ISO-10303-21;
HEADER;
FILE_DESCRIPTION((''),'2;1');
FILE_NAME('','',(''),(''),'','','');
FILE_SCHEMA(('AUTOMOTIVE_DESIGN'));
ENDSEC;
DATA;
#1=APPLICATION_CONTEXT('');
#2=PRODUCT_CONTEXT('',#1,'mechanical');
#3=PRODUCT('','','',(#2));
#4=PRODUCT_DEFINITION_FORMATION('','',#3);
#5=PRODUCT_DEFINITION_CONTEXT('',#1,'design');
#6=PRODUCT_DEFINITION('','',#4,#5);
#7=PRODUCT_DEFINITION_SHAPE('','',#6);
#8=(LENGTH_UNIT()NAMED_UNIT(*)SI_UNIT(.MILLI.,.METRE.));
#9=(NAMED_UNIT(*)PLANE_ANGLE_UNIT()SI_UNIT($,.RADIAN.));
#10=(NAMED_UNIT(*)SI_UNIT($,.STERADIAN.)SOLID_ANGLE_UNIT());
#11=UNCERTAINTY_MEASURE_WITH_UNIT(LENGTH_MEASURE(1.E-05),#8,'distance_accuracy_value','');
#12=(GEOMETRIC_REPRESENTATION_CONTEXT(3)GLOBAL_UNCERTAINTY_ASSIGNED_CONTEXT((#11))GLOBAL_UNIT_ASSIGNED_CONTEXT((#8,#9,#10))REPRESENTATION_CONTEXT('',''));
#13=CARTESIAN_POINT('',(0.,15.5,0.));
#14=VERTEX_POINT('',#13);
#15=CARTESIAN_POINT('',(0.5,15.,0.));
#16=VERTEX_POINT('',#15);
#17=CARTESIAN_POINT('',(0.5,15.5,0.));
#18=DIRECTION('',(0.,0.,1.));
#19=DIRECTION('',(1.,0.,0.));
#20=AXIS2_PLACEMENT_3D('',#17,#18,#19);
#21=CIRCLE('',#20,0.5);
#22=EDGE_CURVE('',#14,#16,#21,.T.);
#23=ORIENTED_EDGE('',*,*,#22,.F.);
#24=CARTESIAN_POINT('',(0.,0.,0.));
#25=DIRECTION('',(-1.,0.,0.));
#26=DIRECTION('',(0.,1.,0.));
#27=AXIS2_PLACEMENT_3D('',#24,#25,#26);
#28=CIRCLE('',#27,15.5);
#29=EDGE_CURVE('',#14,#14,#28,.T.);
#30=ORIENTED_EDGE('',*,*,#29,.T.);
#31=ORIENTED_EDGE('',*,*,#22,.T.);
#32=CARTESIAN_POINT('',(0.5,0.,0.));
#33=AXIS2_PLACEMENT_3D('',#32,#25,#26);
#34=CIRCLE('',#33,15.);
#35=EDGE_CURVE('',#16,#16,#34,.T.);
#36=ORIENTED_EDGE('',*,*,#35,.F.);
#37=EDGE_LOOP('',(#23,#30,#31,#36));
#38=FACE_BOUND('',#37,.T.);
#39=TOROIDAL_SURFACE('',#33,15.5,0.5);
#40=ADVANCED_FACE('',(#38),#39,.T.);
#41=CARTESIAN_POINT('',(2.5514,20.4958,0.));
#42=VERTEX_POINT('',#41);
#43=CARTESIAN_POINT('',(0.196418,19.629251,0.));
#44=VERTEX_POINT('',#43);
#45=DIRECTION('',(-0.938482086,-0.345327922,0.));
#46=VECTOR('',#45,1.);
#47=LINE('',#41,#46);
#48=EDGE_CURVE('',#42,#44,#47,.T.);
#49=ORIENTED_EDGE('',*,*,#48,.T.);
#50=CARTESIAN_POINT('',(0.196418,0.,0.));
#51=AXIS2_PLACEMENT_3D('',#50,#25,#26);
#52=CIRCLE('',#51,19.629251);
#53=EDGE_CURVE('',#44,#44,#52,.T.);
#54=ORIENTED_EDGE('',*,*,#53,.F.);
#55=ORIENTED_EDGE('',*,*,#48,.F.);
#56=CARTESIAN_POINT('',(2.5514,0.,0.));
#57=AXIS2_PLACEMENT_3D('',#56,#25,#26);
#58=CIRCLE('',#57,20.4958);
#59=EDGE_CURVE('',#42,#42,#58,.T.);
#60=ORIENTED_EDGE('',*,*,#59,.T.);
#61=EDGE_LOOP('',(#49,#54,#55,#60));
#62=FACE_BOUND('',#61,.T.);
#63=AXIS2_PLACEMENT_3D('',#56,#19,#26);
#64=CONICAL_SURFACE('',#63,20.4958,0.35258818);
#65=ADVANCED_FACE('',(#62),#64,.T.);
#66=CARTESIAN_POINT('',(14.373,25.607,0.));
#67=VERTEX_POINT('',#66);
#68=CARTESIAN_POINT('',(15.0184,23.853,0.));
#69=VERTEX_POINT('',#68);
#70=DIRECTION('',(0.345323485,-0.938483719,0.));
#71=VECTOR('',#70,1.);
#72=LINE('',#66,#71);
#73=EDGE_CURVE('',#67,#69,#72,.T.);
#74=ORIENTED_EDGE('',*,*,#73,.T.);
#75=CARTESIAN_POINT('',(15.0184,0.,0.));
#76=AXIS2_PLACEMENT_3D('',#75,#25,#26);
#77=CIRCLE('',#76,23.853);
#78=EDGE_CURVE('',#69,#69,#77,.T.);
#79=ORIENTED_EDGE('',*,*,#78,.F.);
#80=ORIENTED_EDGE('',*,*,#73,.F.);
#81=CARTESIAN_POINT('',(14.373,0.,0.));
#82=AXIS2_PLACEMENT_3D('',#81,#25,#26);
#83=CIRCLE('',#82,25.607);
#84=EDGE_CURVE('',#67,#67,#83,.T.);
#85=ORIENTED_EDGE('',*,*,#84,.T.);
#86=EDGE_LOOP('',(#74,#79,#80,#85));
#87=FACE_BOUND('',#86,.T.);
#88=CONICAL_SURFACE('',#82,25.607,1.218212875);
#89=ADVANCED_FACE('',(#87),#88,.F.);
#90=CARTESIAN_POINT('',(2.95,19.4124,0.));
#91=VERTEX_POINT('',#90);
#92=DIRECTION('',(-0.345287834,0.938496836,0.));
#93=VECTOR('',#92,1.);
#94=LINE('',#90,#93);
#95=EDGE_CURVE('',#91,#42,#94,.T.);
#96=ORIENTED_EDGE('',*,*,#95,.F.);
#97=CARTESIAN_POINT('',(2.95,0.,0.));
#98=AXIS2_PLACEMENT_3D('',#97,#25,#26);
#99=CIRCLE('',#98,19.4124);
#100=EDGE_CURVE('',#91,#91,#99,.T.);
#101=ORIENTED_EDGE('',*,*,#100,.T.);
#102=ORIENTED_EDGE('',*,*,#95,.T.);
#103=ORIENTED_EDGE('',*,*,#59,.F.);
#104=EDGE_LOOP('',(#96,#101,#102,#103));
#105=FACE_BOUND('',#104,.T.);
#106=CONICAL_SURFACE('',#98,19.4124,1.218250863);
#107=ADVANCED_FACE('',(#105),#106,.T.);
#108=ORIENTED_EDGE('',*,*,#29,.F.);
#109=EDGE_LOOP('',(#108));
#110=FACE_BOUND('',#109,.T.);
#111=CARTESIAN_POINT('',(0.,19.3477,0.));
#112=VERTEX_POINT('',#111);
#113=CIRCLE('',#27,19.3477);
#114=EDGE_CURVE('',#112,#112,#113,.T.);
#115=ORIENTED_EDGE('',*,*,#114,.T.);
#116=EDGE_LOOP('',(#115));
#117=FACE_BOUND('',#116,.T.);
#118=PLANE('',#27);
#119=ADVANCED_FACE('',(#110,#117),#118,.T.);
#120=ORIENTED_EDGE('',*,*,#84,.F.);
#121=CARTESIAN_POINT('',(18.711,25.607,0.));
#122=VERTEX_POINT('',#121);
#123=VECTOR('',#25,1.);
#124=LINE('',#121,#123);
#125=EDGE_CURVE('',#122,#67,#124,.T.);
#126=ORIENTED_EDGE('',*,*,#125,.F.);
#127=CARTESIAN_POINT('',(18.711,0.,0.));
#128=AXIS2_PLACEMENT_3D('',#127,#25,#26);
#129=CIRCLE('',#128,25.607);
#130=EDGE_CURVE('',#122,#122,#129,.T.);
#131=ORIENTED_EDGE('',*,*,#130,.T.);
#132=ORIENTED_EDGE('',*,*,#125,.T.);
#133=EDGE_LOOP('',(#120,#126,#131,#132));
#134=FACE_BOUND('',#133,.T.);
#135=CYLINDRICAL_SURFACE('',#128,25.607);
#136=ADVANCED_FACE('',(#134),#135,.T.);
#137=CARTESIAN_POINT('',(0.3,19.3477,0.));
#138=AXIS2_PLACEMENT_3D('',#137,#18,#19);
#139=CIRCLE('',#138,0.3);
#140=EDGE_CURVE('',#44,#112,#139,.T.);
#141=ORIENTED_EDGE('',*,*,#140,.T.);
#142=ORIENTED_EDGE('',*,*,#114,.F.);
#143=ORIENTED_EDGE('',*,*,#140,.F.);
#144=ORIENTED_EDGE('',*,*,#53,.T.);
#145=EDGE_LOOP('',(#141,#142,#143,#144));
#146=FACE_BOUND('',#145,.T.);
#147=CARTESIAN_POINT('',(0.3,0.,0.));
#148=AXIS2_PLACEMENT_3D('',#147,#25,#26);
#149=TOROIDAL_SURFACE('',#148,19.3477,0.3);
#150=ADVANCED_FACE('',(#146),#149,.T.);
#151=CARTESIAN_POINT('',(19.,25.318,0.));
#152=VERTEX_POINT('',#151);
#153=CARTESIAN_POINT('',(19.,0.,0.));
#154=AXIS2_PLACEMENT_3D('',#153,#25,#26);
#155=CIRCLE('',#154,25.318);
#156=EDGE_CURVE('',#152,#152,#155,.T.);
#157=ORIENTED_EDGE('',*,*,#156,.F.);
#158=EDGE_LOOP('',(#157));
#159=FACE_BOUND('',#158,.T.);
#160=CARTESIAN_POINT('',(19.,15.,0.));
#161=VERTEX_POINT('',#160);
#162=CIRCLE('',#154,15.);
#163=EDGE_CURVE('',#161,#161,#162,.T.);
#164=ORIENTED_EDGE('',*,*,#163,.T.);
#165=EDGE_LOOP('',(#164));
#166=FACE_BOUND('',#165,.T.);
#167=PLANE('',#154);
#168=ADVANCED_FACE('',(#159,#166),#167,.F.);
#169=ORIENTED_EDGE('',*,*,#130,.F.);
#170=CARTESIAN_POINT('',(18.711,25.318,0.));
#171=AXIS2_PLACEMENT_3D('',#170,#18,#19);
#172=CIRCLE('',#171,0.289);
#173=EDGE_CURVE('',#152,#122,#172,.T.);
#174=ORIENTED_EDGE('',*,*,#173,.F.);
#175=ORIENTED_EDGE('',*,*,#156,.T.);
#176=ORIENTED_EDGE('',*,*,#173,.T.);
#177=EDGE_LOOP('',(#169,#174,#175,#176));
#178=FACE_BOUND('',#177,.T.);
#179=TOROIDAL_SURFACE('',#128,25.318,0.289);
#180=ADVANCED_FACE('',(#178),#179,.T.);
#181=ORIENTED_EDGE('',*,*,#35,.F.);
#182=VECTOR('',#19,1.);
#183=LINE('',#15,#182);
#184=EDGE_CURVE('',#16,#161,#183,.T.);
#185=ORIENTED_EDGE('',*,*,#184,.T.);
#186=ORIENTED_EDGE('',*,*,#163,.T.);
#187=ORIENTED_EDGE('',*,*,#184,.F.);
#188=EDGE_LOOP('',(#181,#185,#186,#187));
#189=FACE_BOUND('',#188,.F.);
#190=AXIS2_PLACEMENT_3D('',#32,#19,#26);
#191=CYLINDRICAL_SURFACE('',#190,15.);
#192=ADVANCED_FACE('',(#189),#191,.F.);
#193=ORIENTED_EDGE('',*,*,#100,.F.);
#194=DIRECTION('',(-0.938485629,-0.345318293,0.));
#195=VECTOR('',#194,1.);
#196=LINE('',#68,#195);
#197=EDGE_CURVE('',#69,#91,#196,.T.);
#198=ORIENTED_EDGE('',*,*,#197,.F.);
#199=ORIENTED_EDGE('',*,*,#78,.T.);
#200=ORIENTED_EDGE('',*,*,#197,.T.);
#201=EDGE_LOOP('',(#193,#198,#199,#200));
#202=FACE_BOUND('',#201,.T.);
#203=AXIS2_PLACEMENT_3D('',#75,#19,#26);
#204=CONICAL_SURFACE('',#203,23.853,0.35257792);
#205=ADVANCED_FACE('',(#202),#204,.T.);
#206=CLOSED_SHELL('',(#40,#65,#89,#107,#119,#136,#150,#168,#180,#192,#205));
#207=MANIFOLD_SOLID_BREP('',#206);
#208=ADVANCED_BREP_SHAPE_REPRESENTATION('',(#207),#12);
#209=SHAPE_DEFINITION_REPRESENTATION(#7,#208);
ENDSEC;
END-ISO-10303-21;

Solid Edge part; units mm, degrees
sketch "Sketch1" plane through (0, 0, 0) normal (0, 0, 1) x (1, 0, 0)
  arc A0 (0, 15.5) -> (0.5, 15) centre (0.5, 15.5) ccw
  line L0 (0.5, 15) -> (19, 15)
  line L1 (19, 15) -> (19, 25.318)
  arc A1 (19, 25.318) -> (18.711, 25.607) centre (18.711, 25.318) ccw
  line L2 (18.711, 25.607) -> (14.373, 25.607)
  line L3 (14.373, 25.607) -> (15.0184, 23.853)
  line L4 (15.0184, 23.853) -> (2.95, 19.4124)
  line L5 (2.95, 19.4124) -> (2.5514, 20.4958)
  line L6 (2.5514, 20.4958) -> (0.1964, 19.6293)
  arc A2 (0.1964, 19.6293) -> (0, 19.3477) centre (0.3, 19.3477) ccw
  line L7 (0, 19.3477) -> (0, 15.5)
revolve "RevolvedProtrusion1" add sketch "Sketch1" angle 360 about axis through (50, 0, 0) along (-1, 0, 0)
